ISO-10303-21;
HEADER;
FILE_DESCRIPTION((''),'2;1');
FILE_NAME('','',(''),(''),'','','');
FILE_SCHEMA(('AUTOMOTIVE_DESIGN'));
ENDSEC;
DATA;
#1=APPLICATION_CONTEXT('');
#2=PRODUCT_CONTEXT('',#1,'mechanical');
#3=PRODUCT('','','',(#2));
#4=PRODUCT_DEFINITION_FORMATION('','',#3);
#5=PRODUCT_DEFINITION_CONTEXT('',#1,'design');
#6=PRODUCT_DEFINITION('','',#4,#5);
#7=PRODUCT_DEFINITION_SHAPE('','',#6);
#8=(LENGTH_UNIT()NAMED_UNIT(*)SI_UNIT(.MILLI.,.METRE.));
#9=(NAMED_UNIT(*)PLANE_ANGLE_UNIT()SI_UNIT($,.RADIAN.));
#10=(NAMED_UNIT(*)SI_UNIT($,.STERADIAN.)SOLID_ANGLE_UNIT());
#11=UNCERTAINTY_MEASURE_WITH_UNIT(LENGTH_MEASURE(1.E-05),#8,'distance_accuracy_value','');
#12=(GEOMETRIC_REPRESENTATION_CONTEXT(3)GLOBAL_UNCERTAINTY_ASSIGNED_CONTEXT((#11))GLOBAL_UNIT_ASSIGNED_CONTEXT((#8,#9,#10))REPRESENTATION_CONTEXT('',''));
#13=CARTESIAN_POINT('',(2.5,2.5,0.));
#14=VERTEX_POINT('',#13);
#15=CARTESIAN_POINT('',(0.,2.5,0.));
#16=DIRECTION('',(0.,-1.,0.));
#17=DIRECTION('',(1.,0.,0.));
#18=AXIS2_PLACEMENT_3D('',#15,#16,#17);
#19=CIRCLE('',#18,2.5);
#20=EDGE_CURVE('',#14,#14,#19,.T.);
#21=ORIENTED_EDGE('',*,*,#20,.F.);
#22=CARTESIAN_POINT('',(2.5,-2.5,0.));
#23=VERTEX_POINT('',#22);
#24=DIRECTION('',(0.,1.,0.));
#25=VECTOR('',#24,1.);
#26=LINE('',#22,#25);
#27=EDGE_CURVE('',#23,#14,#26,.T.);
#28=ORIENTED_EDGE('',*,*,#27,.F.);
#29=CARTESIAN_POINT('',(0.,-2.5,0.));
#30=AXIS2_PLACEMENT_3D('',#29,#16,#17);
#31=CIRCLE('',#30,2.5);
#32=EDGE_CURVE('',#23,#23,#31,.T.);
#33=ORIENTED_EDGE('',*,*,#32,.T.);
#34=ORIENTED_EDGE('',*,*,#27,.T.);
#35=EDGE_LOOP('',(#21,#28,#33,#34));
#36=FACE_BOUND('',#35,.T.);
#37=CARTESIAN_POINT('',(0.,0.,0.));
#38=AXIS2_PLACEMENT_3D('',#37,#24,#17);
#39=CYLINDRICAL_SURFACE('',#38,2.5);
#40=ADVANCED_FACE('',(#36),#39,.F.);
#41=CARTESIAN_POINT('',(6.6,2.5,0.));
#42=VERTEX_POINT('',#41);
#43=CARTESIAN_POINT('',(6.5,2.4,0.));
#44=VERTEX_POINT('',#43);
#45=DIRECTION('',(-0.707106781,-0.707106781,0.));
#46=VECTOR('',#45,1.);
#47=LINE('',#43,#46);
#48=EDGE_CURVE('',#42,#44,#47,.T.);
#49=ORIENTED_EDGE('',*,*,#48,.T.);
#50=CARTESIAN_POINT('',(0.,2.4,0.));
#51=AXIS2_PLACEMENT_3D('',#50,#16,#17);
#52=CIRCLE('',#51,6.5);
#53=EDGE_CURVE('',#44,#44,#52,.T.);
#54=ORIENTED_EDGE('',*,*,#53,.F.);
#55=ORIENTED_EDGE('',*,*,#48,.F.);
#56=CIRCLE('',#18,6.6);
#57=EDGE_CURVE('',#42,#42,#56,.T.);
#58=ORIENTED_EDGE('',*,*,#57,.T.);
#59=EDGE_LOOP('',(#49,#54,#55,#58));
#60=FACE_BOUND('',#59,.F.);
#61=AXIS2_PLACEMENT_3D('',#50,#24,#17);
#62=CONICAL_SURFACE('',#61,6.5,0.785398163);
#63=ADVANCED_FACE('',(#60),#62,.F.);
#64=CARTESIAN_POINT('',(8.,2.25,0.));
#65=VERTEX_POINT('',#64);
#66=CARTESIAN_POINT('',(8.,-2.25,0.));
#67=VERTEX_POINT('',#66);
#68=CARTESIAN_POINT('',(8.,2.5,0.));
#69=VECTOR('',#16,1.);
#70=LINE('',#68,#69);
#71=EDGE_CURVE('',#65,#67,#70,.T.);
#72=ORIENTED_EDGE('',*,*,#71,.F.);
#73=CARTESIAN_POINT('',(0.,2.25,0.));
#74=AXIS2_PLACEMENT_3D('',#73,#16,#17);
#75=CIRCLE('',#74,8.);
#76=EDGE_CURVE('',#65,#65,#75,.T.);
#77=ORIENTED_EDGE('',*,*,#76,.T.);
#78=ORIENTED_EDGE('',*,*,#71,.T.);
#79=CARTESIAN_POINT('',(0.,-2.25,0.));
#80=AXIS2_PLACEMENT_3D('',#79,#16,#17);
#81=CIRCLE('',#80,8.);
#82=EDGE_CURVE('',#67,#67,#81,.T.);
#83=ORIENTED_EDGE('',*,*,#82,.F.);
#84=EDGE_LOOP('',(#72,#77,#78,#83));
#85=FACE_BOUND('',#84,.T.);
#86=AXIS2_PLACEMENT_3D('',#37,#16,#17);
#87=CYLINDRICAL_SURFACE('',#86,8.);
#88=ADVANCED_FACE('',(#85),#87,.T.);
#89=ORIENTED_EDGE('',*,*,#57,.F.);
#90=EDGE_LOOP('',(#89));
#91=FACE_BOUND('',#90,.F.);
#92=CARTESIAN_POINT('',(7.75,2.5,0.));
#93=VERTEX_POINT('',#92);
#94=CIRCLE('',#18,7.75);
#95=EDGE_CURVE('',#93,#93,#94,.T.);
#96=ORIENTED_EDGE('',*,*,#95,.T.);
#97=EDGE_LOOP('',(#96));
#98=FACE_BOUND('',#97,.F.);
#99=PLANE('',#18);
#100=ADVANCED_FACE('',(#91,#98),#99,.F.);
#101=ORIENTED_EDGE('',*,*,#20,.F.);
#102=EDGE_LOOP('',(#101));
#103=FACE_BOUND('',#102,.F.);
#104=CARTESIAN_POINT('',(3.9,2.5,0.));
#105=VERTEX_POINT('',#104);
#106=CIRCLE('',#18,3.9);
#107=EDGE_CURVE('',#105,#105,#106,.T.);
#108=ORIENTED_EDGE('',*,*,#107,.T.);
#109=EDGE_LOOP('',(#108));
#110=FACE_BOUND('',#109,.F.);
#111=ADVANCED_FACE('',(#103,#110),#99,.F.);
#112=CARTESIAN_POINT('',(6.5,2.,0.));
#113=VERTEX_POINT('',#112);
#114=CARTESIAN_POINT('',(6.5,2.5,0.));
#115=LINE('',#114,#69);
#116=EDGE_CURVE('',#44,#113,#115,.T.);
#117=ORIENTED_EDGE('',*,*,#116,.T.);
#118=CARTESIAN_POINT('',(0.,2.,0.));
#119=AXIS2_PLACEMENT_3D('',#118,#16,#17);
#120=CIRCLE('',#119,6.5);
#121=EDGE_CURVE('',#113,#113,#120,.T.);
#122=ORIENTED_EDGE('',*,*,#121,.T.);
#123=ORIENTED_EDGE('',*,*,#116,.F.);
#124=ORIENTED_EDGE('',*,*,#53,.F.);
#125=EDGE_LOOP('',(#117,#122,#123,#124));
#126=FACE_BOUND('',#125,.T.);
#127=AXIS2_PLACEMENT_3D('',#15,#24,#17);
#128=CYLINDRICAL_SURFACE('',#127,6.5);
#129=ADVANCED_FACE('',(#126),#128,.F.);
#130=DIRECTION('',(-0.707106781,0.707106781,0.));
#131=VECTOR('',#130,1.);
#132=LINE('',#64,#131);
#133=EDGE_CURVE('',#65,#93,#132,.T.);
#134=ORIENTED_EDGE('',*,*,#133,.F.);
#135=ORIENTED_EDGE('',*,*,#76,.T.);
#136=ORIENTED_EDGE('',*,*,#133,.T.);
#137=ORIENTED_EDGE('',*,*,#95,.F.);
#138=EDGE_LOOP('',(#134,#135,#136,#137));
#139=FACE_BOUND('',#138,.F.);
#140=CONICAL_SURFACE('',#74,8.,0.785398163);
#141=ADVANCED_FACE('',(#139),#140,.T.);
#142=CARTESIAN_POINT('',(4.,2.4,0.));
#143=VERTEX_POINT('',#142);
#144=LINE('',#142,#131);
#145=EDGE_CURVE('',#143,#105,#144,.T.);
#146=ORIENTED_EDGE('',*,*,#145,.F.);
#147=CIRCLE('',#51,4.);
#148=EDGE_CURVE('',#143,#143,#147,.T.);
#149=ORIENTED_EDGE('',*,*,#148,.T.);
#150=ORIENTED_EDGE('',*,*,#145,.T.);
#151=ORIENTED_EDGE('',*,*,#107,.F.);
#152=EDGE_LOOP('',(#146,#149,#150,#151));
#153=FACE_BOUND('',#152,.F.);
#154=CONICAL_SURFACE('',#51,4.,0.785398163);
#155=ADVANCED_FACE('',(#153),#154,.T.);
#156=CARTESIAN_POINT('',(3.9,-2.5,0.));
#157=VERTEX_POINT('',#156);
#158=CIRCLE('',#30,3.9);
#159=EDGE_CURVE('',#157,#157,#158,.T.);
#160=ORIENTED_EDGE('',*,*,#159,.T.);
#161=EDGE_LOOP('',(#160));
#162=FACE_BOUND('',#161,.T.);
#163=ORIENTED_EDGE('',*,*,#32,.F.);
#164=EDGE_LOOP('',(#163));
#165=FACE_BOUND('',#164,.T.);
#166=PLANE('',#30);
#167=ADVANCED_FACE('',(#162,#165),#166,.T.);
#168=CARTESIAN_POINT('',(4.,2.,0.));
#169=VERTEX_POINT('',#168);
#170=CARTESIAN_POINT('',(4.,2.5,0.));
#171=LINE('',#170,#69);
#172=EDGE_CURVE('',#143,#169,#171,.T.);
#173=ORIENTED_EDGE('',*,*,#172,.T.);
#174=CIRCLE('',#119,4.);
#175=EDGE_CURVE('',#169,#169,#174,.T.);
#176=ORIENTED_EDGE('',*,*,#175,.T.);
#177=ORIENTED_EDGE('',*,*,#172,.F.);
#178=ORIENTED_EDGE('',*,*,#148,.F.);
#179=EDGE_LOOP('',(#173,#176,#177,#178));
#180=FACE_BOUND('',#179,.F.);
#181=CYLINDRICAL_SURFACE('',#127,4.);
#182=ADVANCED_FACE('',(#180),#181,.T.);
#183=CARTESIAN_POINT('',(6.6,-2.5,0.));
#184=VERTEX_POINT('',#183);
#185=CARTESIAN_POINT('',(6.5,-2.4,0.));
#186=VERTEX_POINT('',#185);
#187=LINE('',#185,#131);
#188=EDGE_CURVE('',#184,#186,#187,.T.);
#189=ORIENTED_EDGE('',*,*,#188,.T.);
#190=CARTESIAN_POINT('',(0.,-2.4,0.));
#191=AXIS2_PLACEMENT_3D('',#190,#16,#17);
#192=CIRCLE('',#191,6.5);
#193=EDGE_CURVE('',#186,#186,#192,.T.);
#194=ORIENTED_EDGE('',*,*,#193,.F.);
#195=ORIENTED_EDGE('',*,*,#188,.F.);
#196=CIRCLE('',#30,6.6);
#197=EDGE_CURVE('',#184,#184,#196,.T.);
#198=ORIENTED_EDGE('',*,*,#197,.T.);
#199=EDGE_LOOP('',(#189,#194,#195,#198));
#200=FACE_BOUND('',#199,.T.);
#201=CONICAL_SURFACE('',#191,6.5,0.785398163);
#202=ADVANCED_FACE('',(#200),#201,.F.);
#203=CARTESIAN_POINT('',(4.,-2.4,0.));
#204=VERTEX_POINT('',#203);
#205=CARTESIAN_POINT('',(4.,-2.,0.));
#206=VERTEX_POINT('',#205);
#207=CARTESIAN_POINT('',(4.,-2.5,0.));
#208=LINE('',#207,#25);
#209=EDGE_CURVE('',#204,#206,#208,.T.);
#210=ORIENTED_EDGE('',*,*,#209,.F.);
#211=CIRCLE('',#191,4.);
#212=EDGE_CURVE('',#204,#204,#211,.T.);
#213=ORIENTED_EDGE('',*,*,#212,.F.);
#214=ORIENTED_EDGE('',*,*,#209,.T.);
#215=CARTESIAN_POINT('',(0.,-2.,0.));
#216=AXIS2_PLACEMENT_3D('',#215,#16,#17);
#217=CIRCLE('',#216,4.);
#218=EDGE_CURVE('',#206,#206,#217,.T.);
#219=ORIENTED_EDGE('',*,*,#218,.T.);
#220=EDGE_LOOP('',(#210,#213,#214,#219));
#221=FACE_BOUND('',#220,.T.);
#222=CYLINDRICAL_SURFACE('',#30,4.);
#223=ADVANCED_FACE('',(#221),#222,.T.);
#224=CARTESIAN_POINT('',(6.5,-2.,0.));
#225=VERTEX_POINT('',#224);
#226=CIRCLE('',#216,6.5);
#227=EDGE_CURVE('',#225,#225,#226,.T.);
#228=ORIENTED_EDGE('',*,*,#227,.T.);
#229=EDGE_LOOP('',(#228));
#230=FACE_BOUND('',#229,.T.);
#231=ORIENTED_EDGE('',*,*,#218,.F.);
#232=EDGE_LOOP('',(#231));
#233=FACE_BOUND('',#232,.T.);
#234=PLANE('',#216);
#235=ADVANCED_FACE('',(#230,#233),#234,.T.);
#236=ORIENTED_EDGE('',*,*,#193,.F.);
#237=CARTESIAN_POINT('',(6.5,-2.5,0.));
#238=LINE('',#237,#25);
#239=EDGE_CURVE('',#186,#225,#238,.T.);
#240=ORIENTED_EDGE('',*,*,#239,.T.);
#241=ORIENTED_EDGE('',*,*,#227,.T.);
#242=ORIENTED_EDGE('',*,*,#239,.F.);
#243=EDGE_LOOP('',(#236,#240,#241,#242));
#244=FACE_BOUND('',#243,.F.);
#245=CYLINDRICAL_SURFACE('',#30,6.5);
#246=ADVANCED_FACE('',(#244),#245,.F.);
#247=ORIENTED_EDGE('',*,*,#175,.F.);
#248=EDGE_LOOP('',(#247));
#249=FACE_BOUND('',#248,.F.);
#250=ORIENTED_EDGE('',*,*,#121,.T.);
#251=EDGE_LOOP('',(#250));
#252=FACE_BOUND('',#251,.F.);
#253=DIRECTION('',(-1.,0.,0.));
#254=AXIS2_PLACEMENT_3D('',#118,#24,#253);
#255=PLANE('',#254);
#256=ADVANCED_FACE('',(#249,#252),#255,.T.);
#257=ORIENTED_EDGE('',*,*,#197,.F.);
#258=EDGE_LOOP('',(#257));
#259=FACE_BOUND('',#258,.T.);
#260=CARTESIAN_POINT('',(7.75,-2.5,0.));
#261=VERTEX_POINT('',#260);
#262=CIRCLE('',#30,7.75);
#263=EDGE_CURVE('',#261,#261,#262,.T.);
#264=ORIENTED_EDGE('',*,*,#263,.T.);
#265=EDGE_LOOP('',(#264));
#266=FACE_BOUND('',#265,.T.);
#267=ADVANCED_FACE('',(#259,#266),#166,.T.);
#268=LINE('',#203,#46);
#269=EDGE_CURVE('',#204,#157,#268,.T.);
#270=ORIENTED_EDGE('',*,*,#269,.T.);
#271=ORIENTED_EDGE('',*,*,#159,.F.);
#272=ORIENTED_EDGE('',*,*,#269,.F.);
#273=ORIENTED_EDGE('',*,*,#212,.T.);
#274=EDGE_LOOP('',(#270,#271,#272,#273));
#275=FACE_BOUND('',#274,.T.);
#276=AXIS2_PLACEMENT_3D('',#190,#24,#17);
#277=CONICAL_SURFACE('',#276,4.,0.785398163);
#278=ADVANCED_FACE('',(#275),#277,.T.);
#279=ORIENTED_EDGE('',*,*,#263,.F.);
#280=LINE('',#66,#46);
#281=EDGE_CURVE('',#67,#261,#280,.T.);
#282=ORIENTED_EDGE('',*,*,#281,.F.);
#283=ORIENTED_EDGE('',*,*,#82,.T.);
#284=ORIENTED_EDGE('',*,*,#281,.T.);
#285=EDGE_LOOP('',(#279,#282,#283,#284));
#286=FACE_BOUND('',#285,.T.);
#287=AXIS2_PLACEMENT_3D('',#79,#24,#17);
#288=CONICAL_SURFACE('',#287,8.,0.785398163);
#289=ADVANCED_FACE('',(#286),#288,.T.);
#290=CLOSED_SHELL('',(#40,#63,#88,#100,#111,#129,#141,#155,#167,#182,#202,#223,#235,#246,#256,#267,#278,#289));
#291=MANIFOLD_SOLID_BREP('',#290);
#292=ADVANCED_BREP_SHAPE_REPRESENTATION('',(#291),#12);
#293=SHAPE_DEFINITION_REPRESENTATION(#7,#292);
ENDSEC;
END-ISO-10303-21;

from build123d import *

# Parameters (mm, degrees)
F0_R     = 8
F0_R_2   = 2.5
F1_DEPTH = 2.5
F2_R     = 6.5
F2_R_2   = 4
F3_DEPTH = 0.5
F4_SIZE  = 0.25
F5_SIZE  = 0.1


# Not quite as in the source:
# - a pattern or mirror of a feature is missing from the dataset's text; its kind, count and spacing are read off the source's solid


with BuildPart() as f1:
    # F0 (on Front) → F1 (new body, symmetric)
    with BuildSketch(Plane.XZ):
        Circle(F0_R)
        Circle(F0_R_2, mode=Mode.SUBTRACT)
    extrude(amount=F1_DEPTH, both=True)

    # F2 (on face) → F3 (cut)
    with BuildSketch(Plane.XZ.offset(2.5)):
        Circle(F2_R)
        Circle(F2_R_2, mode=Mode.SUBTRACT)
    f3 = extrude(amount=-F3_DEPTH, mode=Mode.SUBTRACT)

    # F3_copies: F3 across plane
    add(f3.mirror(Plane.ZX), mode=Mode.SUBTRACT)

    # F4
    f4_edges = [f1.edges().sort_by_distance(p)[0] for p in [
        (-8, -2.5, 0),
        (-8, 2.5, 0),
    ]]
    chamfer(f4_edges, length=F4_SIZE)

    # F5
    f5_edges = [f1.edges().sort_by_distance(p)[0] for p in [
        (-6.5, -2.5, 0),
        (-4, -2.5, 0),
        (-6.5, 2.5, 0),
        (-4, 2.5, 0),
    ]]
    chamfer(f5_edges, length=F5_SIZE)


solid = f1.part
